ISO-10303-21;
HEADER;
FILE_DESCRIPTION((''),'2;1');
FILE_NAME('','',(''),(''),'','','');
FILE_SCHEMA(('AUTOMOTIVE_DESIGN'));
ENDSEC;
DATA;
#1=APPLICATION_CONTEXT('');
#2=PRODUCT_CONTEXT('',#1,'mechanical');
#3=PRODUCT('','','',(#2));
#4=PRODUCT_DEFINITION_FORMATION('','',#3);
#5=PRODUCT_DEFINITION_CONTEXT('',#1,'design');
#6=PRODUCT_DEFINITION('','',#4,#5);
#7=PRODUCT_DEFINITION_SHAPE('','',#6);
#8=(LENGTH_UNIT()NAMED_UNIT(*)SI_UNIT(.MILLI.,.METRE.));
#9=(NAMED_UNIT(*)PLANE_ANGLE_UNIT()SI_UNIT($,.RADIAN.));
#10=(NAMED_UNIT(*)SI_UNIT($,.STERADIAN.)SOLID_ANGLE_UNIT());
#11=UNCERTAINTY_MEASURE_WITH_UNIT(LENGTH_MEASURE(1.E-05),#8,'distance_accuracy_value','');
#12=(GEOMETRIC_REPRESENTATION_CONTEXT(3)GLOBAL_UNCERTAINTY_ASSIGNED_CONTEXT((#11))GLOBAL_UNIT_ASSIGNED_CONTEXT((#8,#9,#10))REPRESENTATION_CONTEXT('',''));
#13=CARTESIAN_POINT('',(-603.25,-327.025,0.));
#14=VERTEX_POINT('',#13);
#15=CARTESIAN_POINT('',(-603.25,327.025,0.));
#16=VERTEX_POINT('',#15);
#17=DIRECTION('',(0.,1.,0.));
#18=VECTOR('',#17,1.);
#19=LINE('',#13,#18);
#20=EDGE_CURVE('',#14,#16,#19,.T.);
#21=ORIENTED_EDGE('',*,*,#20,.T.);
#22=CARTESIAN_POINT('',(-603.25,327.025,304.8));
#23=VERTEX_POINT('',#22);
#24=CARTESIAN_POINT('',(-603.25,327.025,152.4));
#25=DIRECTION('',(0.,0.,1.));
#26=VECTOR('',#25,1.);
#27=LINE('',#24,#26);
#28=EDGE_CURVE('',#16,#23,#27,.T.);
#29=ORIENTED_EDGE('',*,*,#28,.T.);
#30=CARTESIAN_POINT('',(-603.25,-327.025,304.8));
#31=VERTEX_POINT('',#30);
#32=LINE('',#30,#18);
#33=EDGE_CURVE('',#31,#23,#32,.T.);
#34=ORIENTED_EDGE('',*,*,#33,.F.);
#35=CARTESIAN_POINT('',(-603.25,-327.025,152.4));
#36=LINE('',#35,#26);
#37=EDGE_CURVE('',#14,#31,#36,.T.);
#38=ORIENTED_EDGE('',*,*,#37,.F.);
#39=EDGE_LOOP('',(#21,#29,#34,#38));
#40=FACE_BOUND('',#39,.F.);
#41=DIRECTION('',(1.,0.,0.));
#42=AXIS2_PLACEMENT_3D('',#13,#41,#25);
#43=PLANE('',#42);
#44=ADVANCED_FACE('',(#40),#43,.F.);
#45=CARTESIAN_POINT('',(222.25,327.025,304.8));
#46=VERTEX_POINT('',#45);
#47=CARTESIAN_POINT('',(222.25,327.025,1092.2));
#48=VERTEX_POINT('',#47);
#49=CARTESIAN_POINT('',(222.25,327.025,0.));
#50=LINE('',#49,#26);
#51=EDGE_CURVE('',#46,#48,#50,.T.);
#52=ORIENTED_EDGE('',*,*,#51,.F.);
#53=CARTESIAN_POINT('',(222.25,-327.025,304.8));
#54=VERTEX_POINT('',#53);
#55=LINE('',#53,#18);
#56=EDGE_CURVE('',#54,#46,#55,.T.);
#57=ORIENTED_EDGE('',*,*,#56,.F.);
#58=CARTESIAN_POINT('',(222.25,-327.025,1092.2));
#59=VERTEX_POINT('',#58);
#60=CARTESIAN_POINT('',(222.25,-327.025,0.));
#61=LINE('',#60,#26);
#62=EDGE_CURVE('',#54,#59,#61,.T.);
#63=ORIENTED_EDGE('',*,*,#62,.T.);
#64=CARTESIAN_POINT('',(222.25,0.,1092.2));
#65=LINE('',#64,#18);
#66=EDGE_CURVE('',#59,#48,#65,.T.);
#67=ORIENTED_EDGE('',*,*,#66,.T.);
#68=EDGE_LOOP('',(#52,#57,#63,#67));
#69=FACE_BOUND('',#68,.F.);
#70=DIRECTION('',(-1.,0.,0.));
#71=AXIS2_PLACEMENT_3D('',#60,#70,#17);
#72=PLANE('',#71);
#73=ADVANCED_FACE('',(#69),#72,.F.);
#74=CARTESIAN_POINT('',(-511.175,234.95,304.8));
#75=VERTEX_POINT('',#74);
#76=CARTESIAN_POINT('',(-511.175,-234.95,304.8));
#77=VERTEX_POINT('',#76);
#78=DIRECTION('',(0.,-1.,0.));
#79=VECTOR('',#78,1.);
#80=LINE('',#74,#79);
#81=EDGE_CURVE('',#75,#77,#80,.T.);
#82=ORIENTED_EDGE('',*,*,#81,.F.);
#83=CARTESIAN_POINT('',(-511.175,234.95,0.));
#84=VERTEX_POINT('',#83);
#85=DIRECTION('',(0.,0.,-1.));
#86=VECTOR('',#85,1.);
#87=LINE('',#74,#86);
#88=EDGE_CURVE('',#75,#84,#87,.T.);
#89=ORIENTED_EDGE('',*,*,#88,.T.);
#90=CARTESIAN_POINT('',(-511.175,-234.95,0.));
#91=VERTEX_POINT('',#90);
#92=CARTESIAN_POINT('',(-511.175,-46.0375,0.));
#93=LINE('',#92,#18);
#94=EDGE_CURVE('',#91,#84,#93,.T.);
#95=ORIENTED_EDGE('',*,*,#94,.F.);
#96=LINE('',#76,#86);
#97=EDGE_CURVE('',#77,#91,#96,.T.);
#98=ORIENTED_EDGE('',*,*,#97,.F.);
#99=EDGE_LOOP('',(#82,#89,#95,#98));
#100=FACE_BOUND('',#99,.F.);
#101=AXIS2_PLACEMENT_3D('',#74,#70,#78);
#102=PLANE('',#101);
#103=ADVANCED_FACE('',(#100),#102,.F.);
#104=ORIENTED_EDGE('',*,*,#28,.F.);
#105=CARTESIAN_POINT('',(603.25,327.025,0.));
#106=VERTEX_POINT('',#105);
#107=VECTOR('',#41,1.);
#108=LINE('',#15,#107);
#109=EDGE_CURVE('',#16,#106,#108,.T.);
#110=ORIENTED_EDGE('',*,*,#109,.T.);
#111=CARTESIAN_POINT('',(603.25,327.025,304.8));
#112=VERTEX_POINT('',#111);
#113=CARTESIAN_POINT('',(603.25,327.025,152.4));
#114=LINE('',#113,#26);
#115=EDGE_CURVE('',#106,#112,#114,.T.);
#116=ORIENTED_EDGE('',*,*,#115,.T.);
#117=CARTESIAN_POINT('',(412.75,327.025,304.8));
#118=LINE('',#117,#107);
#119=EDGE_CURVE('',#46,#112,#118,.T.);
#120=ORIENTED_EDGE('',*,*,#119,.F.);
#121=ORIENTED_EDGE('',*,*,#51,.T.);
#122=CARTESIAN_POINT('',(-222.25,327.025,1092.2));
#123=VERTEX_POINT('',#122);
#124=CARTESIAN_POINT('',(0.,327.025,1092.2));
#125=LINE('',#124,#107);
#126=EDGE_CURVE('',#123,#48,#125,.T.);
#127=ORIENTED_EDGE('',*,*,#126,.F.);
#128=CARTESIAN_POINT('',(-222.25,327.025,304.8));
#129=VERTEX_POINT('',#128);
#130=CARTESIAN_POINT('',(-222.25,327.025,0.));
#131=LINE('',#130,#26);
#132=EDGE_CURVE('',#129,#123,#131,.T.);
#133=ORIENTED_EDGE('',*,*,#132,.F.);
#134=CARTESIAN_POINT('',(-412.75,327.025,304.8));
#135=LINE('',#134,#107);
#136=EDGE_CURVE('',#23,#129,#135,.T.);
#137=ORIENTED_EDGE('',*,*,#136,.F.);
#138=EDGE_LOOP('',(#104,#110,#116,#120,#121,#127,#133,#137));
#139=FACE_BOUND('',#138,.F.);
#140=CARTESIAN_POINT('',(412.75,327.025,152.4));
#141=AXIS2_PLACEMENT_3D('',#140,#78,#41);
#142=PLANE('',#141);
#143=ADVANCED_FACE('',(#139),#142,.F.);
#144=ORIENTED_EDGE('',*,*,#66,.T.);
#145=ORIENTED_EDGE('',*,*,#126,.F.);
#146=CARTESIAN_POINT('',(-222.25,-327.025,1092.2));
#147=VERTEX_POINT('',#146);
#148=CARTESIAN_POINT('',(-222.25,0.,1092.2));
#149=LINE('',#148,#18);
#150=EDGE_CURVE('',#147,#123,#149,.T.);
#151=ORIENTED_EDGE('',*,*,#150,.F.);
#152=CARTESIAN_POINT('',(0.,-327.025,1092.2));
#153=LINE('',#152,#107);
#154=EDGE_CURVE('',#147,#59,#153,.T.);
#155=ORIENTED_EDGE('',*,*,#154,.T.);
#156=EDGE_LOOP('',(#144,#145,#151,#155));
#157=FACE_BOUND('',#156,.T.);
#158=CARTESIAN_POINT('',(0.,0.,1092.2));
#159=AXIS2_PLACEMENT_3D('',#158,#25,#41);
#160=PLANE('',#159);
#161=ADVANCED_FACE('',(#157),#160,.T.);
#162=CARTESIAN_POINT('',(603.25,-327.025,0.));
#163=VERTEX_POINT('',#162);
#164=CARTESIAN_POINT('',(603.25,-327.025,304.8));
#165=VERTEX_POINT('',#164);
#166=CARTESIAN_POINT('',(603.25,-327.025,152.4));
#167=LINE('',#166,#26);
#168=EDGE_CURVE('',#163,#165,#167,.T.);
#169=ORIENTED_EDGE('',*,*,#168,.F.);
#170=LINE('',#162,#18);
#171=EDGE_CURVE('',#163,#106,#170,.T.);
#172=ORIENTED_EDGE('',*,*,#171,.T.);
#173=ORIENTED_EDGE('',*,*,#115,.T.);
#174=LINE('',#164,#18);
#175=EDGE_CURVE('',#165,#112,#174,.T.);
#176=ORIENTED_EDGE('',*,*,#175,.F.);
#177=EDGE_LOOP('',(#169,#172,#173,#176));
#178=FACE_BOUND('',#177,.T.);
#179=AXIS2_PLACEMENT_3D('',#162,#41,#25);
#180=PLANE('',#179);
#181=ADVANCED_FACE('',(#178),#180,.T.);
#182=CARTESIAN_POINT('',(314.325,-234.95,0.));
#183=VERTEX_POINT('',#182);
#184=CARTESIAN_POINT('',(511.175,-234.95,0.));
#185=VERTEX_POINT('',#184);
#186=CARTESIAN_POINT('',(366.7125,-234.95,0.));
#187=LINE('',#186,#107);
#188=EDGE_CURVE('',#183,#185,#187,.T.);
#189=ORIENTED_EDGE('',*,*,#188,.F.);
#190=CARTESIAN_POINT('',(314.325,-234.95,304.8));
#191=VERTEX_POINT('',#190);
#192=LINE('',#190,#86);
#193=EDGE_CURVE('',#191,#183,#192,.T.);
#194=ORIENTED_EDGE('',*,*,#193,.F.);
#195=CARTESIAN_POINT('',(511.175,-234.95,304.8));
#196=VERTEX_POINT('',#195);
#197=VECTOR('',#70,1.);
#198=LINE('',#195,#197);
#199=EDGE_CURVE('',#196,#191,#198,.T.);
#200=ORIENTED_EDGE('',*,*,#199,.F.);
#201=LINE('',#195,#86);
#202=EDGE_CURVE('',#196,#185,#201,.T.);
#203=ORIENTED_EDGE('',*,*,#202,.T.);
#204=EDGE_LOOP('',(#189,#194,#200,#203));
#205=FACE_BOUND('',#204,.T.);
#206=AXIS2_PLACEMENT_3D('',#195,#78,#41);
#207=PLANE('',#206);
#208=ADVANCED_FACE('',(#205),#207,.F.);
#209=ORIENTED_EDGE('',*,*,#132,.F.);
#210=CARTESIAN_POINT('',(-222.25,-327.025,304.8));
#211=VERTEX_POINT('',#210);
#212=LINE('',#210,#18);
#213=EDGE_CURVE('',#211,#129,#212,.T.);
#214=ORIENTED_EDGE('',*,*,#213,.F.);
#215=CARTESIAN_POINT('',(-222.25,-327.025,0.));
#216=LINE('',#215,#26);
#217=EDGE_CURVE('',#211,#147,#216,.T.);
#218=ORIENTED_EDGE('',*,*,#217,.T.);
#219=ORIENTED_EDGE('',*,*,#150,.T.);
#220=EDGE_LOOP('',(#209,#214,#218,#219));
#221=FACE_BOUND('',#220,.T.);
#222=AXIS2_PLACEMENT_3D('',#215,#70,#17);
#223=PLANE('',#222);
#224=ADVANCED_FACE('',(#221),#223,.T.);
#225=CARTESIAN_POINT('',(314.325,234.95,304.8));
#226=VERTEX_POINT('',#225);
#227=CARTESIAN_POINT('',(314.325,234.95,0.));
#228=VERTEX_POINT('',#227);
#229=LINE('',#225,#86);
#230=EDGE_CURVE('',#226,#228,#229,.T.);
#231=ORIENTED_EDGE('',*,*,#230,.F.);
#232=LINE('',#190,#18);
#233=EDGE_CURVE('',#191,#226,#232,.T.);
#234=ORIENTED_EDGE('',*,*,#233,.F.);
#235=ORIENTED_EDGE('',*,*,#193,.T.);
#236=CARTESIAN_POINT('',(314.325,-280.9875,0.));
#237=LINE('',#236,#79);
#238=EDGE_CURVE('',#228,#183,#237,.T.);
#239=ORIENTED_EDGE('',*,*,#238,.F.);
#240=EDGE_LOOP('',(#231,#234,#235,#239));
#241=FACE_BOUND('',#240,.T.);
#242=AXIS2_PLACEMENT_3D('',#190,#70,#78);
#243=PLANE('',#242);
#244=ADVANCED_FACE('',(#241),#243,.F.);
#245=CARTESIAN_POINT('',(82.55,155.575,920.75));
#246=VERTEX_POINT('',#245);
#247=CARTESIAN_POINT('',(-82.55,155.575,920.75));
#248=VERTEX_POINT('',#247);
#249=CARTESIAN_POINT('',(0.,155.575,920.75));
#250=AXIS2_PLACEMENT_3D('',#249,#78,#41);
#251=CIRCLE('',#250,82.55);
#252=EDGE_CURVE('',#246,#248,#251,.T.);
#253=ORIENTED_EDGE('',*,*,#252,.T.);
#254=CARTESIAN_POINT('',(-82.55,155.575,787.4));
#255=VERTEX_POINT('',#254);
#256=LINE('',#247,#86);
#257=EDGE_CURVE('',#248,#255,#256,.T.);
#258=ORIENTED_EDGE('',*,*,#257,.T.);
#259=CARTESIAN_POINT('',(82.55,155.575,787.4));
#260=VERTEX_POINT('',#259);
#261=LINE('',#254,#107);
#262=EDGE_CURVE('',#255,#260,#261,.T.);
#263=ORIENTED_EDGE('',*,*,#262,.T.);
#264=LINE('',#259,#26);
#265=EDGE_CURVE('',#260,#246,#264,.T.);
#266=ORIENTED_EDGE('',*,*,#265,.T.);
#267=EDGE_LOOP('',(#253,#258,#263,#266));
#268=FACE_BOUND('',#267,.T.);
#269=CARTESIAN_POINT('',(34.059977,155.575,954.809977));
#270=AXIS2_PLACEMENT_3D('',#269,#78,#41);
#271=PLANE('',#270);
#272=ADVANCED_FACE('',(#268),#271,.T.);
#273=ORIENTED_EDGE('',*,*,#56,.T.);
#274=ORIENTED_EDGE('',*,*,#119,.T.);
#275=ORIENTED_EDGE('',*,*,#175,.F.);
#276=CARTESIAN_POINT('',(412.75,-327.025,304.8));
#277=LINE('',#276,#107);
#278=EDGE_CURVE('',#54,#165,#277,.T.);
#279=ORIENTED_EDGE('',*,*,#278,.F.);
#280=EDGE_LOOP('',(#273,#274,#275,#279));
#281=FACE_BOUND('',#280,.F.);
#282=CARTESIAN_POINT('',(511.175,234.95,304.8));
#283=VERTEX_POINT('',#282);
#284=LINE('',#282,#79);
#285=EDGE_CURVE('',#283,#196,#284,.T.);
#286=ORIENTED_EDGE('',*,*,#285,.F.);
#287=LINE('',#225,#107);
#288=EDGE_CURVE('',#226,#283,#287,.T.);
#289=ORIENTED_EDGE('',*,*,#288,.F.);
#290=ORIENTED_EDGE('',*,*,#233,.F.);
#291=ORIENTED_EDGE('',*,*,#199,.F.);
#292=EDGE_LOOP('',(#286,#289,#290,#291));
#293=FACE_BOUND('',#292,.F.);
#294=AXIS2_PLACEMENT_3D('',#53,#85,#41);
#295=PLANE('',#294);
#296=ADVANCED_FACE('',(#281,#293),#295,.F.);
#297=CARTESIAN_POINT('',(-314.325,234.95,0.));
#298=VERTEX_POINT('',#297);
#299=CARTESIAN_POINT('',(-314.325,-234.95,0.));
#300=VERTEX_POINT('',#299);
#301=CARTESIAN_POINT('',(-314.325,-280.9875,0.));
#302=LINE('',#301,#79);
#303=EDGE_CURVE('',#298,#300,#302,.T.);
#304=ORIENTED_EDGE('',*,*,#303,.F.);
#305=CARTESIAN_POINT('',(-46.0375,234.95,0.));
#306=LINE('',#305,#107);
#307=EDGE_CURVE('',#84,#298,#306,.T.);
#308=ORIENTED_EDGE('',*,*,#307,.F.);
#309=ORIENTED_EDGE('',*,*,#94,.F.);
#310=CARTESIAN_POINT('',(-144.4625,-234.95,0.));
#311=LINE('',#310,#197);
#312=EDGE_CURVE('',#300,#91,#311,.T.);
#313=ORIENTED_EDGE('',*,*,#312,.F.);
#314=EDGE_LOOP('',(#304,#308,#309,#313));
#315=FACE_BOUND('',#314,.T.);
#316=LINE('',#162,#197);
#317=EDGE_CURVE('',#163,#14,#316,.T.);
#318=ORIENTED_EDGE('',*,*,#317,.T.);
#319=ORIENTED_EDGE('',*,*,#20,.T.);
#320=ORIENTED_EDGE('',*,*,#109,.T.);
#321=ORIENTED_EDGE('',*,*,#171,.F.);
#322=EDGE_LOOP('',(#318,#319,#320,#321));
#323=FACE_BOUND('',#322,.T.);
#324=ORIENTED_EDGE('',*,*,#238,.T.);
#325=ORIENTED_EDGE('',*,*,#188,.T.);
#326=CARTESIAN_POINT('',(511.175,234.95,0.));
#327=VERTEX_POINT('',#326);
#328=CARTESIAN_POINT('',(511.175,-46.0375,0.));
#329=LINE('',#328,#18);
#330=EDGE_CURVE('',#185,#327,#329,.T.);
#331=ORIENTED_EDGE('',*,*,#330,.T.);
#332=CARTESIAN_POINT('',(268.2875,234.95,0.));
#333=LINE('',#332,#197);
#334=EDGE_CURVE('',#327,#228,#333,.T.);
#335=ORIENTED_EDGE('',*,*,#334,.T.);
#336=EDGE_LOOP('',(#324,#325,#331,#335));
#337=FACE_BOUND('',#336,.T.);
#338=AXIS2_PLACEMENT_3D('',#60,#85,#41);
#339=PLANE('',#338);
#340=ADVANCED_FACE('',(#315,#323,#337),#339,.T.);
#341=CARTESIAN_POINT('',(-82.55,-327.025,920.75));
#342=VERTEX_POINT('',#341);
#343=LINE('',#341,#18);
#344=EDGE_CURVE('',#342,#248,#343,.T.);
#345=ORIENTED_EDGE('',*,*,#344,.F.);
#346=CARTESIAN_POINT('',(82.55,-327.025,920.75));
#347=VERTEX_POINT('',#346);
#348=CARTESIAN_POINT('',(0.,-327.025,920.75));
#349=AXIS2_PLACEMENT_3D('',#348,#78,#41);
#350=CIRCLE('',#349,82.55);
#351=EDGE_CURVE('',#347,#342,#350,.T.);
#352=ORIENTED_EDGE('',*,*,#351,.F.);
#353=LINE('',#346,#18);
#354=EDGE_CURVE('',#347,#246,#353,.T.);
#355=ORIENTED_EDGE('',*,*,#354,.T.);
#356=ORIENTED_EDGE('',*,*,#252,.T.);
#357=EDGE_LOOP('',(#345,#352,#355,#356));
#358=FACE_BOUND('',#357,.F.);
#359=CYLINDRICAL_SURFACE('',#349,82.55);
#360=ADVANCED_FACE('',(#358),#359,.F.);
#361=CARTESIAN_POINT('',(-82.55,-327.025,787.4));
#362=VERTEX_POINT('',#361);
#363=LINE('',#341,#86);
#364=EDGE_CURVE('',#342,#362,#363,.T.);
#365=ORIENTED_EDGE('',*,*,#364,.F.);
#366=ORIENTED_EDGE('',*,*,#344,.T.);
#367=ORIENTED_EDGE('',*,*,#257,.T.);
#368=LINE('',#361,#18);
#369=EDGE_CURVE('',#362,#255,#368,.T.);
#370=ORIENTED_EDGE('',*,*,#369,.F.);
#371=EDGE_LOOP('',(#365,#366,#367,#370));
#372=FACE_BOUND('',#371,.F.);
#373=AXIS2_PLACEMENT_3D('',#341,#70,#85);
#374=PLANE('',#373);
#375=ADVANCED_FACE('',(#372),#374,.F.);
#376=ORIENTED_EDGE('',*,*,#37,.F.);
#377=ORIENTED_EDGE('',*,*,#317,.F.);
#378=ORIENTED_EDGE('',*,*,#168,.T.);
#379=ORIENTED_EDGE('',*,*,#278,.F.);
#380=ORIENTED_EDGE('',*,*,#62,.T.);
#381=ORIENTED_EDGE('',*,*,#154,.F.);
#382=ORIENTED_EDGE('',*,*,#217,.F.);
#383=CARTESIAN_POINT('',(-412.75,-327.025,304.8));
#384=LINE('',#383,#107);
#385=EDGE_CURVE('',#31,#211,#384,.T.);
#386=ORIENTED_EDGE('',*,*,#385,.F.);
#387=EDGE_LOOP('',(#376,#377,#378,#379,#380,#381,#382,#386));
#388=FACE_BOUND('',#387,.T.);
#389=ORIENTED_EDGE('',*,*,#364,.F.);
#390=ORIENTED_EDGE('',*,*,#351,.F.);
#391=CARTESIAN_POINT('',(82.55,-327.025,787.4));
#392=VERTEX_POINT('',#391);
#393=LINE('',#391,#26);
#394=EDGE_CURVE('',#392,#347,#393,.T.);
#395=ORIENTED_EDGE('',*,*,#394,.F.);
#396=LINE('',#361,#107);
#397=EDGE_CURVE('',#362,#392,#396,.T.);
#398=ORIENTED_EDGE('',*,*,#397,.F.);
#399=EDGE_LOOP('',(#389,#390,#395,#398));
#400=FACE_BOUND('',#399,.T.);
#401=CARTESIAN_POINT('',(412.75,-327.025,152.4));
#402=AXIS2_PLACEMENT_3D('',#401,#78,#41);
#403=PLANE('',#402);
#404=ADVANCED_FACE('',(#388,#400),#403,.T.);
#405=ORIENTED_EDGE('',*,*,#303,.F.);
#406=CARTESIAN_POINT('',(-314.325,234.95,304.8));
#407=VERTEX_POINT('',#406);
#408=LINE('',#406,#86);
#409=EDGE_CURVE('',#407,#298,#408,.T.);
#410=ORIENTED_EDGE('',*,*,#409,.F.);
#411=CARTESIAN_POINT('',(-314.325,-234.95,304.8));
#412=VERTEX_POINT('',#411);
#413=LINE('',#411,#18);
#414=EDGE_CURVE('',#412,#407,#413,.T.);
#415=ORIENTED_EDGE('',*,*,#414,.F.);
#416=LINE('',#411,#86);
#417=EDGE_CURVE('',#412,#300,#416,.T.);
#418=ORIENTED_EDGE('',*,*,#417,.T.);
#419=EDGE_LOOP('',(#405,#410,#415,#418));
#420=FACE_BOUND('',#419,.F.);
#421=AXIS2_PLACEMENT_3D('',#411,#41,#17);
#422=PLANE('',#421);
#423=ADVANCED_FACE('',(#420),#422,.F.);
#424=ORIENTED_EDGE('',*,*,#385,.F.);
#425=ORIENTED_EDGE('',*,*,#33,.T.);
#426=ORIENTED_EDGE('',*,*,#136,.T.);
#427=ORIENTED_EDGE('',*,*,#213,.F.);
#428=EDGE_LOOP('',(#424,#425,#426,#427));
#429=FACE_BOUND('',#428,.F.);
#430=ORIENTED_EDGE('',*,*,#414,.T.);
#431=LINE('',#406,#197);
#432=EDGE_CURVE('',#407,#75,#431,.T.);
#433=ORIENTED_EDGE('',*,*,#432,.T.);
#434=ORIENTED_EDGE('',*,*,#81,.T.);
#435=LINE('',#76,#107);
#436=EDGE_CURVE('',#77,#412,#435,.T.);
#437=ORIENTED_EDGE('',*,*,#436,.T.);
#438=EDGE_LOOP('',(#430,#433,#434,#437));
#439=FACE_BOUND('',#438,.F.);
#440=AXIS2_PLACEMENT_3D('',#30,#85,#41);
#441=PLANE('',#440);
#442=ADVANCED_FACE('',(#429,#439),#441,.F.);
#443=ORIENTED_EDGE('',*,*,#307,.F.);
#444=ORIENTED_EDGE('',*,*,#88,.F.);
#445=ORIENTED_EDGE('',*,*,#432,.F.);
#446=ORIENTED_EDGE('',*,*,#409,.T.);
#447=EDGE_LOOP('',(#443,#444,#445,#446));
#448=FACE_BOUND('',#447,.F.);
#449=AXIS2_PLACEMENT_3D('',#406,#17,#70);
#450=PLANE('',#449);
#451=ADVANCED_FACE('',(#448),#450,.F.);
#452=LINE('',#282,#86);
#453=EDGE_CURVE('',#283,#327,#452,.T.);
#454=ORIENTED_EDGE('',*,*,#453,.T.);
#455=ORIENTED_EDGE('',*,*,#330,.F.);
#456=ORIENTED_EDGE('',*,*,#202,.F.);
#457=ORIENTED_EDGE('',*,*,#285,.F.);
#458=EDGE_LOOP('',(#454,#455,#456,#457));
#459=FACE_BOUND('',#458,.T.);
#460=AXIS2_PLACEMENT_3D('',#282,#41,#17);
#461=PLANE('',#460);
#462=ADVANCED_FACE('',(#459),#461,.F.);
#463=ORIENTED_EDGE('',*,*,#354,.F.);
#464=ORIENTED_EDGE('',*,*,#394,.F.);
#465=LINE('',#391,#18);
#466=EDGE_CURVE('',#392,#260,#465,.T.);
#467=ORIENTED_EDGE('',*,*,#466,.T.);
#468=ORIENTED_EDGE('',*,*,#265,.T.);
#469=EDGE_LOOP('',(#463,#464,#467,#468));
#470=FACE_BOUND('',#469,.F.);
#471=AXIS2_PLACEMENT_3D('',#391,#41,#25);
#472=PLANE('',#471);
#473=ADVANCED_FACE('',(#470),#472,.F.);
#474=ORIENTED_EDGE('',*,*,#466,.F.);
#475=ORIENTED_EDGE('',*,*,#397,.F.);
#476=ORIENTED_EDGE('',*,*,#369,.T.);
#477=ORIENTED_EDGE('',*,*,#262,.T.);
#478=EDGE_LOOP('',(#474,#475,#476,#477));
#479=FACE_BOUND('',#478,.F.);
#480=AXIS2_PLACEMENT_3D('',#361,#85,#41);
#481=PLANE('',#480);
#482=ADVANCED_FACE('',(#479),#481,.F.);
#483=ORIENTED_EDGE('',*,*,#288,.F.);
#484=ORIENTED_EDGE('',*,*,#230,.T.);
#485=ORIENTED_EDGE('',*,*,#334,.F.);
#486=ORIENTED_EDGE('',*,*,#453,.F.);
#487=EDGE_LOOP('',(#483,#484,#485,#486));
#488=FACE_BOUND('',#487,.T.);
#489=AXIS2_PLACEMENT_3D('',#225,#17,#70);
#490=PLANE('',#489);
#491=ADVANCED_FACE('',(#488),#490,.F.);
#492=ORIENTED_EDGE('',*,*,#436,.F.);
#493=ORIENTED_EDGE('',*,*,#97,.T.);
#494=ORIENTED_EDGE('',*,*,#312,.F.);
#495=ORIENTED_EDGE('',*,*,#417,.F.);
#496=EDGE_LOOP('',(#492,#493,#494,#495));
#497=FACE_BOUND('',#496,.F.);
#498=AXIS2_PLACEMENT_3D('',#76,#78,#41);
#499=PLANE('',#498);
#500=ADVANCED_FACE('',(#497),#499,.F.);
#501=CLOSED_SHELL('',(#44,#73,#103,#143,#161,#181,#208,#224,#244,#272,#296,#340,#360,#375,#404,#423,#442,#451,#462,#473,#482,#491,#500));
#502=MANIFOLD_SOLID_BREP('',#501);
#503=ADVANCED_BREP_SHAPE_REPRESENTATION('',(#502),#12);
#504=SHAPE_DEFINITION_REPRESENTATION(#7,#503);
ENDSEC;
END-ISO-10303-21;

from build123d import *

# Parameters (mm, degrees)
F0_W     = 444.5
F0_H     = 654.05
F1_DEPTH = 1092.2
F2_W     = 381
F2_H     = 304.8
F3_DEPTH = 654.05
F5_DEPTH = 304.801
F7_DEPTH = 482.6


# Not quite as in the source:
# - a pattern or mirror of a feature is missing from the dataset's text; its kind, count and spacing are read off the source's solid


with BuildPart() as f1:
    # F0 (on Top) → F1 (new body)
    with BuildSketch(Plane.XY):
        Rectangle(F0_W, F0_H)
    extrude(amount=F1_DEPTH)

    # F2 (on face) → F3 (join, through all)
    with BuildSketch(Plane.XZ.offset(327.025)):
        with Locations((412.75, 152.4)):
            Rectangle(F2_W, F2_H)
        with Locations((-412.75, 152.4)):
            Rectangle(F2_W, F2_H)
    extrude(amount=-F3_DEPTH)

    # F4 (on face) → F5 (cut, through all)
    with BuildSketch(Plane.XY.offset(304.8)):
        Polygon((-314.325, -234.95), (-314.325, 168.9629166667), (-511.175, -168.9629166667), (-511.175, -234.95), align=None)
        Polygon((-511.175, -168.9629166667), (-314.325, 168.9629166667), (-314.325, 234.95), (-511.175, 234.95), align=None)
    f5 = extrude(amount=-F5_DEPTH, mode=Mode.SUBTRACT)

    # F5_copies: F5 across plane
    add(f5.mirror(Plane(origin=(0, 0, 0), x_dir=(0, 0, 1), z_dir=(1, 0, 0))), mode=Mode.SUBTRACT)

    # F6 (on face) → F7 (cut)
    with BuildSketch(Plane.XZ.offset(327.025)):
        with BuildLine():
            ThreePointArc((82.55, 920.75), (58.3716647869, 979.121664787), (0, 1003.3))
            Line((0, 1003.3), (0, 920.75))
            Line((0, 920.75), (82.55, 920.75))
        make_face()
        with BuildLine():
            Line((0, 920.75), (0, 1003.3))
            ThreePointArc((0, 1003.3), (-58.371664787, 979.1216647869), (-82.55, 920.75))
            Line((-82.55, 920.75), (0, 920.75))
        make_face()
        with BuildLine():
            Line((82.55, 920.75), (0, 920.75))
            Line((0, 920.75), (0, 838.2))
            ThreePointArc((0, 838.2), (58.3716647869, 862.378335213), (82.55, 920.75))
        make_face()
        with BuildLine():
            Line((0, 838.2), (0, 920.75))
            Line((0, 920.75), (-82.55, 920.75))
            ThreePointArc((-82.55, 920.75), (-58.371664787, 862.3783352131), (0, 838.2))
        make_face()
        with BuildLine():
            Line((82.55, 787.4), (82.55, 920.75))
            ThreePointArc((82.55, 920.75), (58.3716647869, 862.378335213), (0, 838.2))
            Line((0, 838.2), (0, 787.4))
            Line((0, 787.4), (82.55, 787.4))
        make_face()
        with BuildLine():
            ThreePointArc((0, 838.2), (-58.371664787, 862.3783352131), (-82.55, 920.75))
            Line((-82.55, 920.75), (-82.55, 787.4))
            Line((-82.55, 787.4), (0, 787.4))
            Line((0, 787.4), (0, 838.2))
        make_face()
    extrude(amount=-F7_DEPTH, mode=Mode.SUBTRACT)


solid = f1.part
